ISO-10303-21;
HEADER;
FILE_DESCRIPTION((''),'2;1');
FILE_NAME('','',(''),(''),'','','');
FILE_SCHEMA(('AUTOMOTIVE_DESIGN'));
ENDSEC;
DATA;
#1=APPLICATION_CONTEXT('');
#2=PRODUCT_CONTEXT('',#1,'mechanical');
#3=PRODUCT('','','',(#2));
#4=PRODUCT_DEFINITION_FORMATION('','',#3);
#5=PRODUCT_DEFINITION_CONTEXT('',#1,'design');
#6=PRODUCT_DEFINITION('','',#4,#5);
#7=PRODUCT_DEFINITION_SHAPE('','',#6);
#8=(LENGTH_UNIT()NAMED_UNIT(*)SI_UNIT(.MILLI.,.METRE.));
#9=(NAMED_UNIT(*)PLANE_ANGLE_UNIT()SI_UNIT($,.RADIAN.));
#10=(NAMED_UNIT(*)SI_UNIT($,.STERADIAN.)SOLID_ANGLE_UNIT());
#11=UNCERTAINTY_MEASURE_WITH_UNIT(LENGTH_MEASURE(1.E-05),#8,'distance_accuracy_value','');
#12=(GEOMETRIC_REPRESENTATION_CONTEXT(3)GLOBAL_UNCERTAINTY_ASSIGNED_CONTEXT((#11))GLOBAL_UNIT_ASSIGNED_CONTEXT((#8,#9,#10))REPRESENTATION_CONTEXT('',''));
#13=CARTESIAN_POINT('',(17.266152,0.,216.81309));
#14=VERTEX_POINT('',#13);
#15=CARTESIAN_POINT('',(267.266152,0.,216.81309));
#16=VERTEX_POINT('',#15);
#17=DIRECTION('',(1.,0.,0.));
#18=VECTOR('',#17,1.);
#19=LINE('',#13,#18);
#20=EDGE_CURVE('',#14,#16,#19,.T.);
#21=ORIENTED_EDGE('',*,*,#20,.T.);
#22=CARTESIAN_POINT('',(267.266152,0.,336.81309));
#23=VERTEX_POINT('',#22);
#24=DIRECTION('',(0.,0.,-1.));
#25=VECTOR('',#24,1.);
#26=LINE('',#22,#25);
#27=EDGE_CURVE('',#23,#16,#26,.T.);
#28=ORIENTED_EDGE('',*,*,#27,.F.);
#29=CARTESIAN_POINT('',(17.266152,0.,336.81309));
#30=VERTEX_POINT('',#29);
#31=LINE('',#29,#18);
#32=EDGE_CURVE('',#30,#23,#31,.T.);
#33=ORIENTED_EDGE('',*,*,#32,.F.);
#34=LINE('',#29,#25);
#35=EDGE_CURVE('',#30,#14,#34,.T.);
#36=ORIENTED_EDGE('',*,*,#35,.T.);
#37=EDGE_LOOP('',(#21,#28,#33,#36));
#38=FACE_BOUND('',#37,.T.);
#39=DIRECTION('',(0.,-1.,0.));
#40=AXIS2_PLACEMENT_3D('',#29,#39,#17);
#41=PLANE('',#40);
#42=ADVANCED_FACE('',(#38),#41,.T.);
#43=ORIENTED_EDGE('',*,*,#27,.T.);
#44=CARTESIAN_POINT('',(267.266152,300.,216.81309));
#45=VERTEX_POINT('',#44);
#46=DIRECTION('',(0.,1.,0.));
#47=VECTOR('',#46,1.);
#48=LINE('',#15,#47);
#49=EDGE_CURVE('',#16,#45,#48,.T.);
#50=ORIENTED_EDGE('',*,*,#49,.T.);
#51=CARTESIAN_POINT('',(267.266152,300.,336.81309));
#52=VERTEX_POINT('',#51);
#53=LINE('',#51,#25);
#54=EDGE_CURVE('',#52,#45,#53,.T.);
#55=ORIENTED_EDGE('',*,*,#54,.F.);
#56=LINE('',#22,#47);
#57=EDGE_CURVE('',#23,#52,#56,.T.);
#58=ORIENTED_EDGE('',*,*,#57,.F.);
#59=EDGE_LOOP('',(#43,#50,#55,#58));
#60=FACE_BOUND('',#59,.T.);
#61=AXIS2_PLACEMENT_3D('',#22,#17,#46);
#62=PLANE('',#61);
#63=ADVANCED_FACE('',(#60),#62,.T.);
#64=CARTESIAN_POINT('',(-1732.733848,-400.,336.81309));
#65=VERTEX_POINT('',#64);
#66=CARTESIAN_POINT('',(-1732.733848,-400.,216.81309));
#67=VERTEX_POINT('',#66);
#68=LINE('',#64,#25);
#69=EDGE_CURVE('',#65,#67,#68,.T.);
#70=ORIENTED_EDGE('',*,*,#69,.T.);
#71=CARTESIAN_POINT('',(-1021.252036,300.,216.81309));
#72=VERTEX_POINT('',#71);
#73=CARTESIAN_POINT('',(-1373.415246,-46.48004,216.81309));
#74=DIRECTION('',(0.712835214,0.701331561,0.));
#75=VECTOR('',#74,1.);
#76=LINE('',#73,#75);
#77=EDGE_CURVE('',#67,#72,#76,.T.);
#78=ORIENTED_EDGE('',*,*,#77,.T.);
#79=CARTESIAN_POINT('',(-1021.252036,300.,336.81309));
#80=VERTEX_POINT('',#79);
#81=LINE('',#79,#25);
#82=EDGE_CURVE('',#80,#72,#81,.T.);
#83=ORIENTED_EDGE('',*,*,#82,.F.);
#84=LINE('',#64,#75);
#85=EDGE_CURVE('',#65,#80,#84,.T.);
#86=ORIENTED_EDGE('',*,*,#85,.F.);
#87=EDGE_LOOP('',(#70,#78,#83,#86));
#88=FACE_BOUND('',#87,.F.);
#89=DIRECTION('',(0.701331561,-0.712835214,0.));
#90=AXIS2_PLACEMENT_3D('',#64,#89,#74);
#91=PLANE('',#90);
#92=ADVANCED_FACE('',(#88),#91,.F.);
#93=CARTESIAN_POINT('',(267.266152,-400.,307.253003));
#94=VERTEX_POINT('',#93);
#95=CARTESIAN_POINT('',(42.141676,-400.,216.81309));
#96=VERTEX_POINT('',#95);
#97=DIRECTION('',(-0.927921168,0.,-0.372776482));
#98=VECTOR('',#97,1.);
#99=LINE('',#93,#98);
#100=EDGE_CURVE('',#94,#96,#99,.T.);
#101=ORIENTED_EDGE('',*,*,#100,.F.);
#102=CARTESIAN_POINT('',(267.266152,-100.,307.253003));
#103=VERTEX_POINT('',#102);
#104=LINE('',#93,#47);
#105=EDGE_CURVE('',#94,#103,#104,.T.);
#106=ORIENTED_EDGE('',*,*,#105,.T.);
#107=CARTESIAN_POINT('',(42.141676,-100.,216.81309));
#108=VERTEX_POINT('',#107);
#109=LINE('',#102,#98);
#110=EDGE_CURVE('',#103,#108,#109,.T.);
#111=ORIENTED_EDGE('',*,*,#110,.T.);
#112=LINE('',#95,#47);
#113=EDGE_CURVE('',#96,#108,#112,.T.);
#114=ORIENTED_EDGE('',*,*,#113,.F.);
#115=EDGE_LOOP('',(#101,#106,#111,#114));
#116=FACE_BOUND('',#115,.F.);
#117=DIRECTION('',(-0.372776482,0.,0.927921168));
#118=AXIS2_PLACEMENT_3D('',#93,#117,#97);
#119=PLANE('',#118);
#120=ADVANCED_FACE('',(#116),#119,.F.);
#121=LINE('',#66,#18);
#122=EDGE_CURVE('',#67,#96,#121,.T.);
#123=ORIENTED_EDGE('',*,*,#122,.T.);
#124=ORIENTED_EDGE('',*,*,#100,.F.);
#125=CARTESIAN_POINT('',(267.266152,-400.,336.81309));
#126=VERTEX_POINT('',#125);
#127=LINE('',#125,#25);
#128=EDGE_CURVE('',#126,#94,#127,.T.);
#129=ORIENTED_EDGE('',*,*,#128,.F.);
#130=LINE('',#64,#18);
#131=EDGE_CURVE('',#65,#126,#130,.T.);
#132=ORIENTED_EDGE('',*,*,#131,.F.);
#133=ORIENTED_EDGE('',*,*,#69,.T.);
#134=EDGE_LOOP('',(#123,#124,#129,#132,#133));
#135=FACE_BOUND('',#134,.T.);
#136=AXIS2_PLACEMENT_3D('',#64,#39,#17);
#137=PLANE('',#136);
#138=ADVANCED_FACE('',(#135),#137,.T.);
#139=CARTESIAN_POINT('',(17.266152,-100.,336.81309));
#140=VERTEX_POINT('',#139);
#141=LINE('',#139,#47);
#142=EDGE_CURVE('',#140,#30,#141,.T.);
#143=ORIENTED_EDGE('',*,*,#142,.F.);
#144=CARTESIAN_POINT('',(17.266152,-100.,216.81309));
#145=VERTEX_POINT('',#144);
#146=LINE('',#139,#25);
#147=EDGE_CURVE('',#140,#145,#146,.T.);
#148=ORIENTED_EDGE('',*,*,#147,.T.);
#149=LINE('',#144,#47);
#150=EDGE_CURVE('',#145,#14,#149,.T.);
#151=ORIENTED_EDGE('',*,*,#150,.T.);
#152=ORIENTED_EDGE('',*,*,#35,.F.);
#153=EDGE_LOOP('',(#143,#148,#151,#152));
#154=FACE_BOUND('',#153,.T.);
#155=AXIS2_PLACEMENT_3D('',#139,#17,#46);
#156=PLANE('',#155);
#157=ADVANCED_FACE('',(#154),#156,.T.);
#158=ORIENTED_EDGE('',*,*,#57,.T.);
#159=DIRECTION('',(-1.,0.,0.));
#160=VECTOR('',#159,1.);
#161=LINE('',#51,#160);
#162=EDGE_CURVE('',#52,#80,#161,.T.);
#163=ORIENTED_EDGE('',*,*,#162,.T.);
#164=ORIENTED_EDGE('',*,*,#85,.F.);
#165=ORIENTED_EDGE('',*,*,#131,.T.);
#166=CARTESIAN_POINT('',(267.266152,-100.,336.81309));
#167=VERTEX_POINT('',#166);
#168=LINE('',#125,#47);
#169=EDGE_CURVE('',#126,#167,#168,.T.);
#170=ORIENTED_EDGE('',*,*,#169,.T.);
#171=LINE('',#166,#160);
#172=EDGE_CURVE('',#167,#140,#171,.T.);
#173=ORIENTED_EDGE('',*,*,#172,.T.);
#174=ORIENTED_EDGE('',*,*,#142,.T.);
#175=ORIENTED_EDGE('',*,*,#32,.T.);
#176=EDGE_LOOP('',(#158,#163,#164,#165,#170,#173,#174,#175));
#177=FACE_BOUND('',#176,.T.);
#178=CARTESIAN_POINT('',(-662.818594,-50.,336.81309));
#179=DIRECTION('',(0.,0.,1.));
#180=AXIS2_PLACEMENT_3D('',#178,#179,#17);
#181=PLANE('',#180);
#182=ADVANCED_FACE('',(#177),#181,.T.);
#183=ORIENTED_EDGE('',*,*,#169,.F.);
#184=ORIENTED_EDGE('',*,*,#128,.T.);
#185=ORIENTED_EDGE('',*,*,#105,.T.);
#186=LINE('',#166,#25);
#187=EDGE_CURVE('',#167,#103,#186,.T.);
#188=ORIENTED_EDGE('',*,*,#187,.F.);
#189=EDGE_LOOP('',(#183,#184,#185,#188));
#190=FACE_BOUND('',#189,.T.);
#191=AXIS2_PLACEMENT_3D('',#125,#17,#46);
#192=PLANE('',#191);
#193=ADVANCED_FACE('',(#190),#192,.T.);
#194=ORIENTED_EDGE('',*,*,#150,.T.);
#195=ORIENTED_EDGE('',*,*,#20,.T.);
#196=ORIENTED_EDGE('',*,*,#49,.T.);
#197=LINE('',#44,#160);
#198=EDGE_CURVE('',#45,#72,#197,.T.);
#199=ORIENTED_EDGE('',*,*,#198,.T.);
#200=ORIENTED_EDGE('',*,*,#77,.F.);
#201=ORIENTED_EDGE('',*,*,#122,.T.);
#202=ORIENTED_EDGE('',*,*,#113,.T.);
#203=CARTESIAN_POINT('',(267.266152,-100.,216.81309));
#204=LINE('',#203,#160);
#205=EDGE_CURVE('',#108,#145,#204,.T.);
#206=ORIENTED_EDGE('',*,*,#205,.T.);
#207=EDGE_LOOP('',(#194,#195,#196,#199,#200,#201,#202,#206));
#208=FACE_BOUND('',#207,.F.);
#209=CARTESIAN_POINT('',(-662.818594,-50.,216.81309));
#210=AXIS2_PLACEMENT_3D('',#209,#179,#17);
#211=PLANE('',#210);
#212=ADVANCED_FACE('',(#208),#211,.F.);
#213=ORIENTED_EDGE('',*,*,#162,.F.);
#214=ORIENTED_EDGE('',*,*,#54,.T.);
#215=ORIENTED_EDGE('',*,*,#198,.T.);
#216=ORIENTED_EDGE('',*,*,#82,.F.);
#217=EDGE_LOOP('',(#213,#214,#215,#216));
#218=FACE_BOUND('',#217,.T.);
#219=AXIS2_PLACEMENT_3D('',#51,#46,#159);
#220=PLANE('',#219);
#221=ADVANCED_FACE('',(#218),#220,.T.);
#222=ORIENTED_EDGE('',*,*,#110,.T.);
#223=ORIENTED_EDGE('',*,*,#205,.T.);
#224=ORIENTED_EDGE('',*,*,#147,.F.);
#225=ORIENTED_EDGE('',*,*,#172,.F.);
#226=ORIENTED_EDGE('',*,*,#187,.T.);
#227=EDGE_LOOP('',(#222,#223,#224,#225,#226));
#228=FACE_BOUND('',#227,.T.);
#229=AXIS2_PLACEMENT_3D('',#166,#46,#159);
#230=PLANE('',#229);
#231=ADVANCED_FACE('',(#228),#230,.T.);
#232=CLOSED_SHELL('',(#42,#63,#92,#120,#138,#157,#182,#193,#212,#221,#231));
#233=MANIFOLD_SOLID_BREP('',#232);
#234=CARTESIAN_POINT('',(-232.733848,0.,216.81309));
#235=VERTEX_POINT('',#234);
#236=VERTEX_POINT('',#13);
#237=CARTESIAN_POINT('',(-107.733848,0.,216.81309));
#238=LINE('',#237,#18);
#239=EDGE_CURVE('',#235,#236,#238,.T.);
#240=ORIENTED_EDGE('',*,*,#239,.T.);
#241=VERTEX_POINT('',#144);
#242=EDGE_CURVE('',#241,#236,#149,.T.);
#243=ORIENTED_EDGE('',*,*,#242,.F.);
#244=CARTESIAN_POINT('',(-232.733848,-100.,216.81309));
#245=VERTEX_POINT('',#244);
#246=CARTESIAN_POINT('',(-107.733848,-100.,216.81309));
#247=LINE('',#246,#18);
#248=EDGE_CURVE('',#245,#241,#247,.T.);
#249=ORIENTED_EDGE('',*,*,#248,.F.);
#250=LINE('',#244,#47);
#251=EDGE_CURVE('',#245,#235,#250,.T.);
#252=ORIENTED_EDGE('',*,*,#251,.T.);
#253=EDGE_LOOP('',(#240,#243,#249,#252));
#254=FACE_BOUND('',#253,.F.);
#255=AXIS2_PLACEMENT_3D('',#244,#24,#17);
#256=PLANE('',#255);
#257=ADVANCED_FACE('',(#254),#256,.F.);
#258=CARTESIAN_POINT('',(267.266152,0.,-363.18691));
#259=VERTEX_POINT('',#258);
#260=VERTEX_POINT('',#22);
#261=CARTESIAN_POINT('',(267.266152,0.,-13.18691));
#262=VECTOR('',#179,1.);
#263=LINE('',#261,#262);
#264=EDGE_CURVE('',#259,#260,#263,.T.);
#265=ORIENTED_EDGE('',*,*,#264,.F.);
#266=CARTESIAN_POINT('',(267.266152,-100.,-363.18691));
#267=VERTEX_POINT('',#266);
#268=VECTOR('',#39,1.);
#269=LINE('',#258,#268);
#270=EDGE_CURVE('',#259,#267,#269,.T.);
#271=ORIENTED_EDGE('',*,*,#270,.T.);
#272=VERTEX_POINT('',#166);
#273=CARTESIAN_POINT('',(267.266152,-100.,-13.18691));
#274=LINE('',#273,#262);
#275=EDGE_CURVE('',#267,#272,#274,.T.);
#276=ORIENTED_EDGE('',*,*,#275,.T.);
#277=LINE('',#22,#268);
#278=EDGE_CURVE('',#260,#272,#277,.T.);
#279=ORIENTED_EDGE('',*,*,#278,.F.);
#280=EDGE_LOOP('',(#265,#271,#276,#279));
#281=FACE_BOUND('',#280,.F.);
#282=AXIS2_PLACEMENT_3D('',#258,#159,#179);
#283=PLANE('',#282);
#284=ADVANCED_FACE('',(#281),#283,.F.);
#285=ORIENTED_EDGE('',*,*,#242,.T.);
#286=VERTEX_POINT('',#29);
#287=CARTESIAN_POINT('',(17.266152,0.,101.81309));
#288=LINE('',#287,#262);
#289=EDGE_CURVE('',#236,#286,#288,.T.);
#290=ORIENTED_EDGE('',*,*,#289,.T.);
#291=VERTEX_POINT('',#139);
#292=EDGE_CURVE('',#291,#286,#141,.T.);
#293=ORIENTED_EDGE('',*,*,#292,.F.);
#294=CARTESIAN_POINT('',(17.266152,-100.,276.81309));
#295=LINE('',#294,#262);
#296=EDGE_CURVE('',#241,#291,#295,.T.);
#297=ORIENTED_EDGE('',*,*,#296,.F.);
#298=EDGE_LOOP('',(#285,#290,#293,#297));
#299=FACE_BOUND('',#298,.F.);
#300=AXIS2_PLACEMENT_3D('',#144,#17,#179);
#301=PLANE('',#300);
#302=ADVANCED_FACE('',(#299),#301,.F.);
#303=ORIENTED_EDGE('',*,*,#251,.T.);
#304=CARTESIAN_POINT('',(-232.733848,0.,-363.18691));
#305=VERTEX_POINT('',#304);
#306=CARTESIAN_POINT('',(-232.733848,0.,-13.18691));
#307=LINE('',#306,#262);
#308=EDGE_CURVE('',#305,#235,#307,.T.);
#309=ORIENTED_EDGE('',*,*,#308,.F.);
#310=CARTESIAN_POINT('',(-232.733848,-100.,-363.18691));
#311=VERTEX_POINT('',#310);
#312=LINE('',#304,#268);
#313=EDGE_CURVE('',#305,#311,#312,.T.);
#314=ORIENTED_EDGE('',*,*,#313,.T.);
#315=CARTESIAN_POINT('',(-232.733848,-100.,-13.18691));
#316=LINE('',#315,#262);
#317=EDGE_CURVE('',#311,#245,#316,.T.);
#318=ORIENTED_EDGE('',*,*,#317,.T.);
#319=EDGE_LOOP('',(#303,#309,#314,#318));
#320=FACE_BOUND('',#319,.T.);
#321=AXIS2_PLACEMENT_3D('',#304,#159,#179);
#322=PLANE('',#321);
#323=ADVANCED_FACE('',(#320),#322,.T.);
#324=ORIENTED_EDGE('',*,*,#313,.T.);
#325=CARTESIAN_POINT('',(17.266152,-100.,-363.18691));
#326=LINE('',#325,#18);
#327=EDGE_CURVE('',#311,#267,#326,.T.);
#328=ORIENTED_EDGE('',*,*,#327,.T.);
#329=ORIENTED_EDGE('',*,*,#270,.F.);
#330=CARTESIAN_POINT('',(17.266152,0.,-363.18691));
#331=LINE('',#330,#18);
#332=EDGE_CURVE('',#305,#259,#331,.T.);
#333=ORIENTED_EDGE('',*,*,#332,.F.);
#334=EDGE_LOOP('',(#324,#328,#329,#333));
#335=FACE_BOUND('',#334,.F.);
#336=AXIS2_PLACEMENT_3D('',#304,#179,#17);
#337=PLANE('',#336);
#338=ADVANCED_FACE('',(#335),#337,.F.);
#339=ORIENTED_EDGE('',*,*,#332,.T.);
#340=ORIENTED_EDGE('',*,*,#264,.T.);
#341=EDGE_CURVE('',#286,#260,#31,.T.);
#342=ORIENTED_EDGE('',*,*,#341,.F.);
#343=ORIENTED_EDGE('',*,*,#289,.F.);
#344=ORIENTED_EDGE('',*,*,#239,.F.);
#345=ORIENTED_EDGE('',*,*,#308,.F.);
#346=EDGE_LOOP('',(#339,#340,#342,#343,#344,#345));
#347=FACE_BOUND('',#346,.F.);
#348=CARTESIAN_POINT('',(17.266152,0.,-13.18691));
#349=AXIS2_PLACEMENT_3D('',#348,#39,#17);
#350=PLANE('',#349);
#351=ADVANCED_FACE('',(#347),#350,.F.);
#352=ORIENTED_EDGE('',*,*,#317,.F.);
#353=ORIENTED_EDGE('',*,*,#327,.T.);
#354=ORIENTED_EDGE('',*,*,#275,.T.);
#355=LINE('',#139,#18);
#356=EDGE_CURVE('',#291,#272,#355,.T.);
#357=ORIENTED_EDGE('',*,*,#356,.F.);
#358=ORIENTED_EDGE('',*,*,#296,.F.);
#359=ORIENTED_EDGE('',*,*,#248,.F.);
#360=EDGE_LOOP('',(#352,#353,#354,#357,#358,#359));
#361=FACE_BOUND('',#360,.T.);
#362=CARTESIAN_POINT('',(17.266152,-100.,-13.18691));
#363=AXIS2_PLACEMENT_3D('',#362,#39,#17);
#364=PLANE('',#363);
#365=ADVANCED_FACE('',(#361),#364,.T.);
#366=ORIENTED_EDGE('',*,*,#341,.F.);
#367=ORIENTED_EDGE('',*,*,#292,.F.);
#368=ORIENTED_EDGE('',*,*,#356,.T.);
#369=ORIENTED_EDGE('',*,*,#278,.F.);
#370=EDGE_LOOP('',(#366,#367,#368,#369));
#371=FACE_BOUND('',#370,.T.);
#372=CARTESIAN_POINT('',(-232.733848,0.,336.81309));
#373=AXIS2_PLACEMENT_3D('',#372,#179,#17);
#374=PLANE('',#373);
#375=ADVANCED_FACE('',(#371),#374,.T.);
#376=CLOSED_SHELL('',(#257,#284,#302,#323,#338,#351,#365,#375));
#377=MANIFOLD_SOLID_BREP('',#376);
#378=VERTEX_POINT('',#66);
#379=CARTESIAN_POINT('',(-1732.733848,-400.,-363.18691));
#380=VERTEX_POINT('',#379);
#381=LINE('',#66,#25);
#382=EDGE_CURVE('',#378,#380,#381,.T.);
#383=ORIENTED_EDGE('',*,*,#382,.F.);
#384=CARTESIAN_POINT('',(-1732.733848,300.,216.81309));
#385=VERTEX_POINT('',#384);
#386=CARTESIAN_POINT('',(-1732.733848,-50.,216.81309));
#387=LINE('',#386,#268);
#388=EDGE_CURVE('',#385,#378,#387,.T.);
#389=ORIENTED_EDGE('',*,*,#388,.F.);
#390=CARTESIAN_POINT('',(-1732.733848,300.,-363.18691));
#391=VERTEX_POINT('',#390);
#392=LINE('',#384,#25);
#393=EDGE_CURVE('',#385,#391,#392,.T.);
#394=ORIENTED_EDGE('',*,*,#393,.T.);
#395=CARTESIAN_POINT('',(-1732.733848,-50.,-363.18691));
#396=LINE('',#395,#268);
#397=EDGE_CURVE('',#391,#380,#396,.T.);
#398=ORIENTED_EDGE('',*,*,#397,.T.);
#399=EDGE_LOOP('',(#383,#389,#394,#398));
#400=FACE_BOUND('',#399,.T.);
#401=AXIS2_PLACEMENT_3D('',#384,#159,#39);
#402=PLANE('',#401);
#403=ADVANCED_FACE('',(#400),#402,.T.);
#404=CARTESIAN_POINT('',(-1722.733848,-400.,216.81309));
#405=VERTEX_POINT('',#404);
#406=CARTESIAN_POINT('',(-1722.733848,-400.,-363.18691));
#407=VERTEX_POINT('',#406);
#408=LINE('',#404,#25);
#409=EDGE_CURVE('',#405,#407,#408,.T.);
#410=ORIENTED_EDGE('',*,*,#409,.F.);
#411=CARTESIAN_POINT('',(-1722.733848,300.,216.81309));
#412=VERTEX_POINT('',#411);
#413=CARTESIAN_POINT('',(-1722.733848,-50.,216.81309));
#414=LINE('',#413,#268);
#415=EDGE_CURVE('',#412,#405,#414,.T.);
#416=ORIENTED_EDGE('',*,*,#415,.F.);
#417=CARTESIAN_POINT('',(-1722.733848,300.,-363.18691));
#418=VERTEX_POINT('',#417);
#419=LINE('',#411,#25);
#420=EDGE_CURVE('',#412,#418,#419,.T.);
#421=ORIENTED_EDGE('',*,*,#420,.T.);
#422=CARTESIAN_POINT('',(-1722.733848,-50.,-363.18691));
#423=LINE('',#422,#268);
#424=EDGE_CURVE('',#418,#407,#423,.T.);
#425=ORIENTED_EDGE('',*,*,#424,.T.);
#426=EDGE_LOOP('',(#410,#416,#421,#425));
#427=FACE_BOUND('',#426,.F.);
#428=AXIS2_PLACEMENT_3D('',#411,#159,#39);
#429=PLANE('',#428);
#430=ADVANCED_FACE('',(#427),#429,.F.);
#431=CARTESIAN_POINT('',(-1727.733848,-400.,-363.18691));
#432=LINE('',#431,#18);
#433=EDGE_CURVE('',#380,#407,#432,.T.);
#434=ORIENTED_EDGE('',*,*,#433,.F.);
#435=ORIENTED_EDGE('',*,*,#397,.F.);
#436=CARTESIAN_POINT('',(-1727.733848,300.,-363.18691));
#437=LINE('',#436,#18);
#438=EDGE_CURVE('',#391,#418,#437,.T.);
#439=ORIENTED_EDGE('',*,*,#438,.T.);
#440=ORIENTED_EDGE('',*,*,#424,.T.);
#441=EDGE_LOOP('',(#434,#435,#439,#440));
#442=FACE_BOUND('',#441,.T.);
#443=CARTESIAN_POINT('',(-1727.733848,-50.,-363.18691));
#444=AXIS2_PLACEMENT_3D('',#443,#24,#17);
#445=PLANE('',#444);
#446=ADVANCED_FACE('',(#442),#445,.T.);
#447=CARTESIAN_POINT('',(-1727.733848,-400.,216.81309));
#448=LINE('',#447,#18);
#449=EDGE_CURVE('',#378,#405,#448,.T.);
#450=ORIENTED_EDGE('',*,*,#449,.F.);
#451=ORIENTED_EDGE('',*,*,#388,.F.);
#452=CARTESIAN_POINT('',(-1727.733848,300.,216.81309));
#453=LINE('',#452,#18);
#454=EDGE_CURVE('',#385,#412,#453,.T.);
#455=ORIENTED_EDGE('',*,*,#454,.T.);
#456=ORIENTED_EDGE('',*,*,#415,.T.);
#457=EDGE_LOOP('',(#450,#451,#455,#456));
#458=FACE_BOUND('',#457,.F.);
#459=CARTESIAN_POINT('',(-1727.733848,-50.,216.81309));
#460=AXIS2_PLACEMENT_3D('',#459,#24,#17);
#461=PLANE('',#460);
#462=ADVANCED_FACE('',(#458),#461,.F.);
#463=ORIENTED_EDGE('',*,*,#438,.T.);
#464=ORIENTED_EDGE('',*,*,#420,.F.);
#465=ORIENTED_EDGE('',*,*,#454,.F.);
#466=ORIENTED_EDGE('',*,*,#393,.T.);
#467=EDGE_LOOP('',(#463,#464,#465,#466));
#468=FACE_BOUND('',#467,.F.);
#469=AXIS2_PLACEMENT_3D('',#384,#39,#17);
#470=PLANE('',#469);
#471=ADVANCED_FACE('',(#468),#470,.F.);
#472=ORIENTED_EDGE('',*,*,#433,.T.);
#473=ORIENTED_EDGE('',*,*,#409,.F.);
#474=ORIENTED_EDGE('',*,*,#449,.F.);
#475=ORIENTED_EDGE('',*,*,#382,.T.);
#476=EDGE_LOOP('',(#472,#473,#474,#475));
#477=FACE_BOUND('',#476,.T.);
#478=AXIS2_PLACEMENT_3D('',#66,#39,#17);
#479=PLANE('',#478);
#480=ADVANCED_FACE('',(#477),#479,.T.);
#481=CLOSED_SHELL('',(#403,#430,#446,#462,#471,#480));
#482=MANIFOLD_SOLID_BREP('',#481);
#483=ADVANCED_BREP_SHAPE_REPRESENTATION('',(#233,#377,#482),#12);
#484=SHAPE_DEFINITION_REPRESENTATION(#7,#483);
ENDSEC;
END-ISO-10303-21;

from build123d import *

# Parameters (mm, degrees)
F0_W      = 500
F0_H      = 700
F1_DEPTH  = 100
F2_W      = 250
F2_H      = 120
F3_DEPTH  = 231
F5_DEPTH  = 120
F6_W      = 10
F6_H      = 700
F7_DEPTH  = 580
F9_DEPTH  = 300
F11_DEPTH = 280


with BuildPart() as f1:
    # F0 (on Front) → F1 (new body)
    with BuildSketch(Plane.XZ):
        with Locations((17.2661517365, -13.1869101897)):
            Rectangle(F0_W, F0_H)
    extrude(amount=F1_DEPTH)

    # F2 (on face) → F3 (cut)
    with BuildSketch(Plane.XZ.offset(100)):
        with Locations((-107.7338482635, 276.8130898103)):
            Rectangle(F2_W, F2_H)
    extrude(amount=-F3_DEPTH, mode=Mode.SUBTRACT)


with BuildPart() as f5:
    # F4 (on face) → F5 (new body, through all)
    with BuildSketch(Plane.XY.offset(336.8130898103)):
        Polygon((17.2661517365, 0), (267.2661517365, 0), (267.2661517365, 300), (-1732.7338482635, 300), (-1732.7338482635, -400), (267.2661517365, -400), (267.2661517365, -100), (17.2661517365, -100), align=None)
    extrude(amount=-F5_DEPTH)

    # F8 (on face) → F9 (cut, through all)
    with BuildSketch(Plane.XZ.offset(400)):
        Polygon((267.2661517365, 307.2530031204), (42.1416759491, 216.8130898103), (267.2661517365, 216.8130898103), align=None)
    extrude(amount=-F9_DEPTH, mode=Mode.SUBTRACT)

    # F10 (on face) → F11 (cut)
    with BuildSketch(Plane.XY.offset(336.8130898103)):
        Polygon((-1732.7338482635, 300), (-1732.7338482635, -400), (-1021.2520360947, 300), align=None)
    extrude(amount=-F11_DEPTH, mode=Mode.SUBTRACT)


with BuildPart() as f7:
    # F6 (on face) → F7 (new body, through all)
    with BuildSketch(Plane(origin=(0, 0, 216.8130898103), x_dir=(1, 0, 0), z_dir=(0, 0, -1))):
        with Locations((-1727.7338482635, 50)):
            Rectangle(F6_W, F6_H)
    extrude(amount=F7_DEPTH)


solid = Compound([f1.part, f5.part, f7.part])
